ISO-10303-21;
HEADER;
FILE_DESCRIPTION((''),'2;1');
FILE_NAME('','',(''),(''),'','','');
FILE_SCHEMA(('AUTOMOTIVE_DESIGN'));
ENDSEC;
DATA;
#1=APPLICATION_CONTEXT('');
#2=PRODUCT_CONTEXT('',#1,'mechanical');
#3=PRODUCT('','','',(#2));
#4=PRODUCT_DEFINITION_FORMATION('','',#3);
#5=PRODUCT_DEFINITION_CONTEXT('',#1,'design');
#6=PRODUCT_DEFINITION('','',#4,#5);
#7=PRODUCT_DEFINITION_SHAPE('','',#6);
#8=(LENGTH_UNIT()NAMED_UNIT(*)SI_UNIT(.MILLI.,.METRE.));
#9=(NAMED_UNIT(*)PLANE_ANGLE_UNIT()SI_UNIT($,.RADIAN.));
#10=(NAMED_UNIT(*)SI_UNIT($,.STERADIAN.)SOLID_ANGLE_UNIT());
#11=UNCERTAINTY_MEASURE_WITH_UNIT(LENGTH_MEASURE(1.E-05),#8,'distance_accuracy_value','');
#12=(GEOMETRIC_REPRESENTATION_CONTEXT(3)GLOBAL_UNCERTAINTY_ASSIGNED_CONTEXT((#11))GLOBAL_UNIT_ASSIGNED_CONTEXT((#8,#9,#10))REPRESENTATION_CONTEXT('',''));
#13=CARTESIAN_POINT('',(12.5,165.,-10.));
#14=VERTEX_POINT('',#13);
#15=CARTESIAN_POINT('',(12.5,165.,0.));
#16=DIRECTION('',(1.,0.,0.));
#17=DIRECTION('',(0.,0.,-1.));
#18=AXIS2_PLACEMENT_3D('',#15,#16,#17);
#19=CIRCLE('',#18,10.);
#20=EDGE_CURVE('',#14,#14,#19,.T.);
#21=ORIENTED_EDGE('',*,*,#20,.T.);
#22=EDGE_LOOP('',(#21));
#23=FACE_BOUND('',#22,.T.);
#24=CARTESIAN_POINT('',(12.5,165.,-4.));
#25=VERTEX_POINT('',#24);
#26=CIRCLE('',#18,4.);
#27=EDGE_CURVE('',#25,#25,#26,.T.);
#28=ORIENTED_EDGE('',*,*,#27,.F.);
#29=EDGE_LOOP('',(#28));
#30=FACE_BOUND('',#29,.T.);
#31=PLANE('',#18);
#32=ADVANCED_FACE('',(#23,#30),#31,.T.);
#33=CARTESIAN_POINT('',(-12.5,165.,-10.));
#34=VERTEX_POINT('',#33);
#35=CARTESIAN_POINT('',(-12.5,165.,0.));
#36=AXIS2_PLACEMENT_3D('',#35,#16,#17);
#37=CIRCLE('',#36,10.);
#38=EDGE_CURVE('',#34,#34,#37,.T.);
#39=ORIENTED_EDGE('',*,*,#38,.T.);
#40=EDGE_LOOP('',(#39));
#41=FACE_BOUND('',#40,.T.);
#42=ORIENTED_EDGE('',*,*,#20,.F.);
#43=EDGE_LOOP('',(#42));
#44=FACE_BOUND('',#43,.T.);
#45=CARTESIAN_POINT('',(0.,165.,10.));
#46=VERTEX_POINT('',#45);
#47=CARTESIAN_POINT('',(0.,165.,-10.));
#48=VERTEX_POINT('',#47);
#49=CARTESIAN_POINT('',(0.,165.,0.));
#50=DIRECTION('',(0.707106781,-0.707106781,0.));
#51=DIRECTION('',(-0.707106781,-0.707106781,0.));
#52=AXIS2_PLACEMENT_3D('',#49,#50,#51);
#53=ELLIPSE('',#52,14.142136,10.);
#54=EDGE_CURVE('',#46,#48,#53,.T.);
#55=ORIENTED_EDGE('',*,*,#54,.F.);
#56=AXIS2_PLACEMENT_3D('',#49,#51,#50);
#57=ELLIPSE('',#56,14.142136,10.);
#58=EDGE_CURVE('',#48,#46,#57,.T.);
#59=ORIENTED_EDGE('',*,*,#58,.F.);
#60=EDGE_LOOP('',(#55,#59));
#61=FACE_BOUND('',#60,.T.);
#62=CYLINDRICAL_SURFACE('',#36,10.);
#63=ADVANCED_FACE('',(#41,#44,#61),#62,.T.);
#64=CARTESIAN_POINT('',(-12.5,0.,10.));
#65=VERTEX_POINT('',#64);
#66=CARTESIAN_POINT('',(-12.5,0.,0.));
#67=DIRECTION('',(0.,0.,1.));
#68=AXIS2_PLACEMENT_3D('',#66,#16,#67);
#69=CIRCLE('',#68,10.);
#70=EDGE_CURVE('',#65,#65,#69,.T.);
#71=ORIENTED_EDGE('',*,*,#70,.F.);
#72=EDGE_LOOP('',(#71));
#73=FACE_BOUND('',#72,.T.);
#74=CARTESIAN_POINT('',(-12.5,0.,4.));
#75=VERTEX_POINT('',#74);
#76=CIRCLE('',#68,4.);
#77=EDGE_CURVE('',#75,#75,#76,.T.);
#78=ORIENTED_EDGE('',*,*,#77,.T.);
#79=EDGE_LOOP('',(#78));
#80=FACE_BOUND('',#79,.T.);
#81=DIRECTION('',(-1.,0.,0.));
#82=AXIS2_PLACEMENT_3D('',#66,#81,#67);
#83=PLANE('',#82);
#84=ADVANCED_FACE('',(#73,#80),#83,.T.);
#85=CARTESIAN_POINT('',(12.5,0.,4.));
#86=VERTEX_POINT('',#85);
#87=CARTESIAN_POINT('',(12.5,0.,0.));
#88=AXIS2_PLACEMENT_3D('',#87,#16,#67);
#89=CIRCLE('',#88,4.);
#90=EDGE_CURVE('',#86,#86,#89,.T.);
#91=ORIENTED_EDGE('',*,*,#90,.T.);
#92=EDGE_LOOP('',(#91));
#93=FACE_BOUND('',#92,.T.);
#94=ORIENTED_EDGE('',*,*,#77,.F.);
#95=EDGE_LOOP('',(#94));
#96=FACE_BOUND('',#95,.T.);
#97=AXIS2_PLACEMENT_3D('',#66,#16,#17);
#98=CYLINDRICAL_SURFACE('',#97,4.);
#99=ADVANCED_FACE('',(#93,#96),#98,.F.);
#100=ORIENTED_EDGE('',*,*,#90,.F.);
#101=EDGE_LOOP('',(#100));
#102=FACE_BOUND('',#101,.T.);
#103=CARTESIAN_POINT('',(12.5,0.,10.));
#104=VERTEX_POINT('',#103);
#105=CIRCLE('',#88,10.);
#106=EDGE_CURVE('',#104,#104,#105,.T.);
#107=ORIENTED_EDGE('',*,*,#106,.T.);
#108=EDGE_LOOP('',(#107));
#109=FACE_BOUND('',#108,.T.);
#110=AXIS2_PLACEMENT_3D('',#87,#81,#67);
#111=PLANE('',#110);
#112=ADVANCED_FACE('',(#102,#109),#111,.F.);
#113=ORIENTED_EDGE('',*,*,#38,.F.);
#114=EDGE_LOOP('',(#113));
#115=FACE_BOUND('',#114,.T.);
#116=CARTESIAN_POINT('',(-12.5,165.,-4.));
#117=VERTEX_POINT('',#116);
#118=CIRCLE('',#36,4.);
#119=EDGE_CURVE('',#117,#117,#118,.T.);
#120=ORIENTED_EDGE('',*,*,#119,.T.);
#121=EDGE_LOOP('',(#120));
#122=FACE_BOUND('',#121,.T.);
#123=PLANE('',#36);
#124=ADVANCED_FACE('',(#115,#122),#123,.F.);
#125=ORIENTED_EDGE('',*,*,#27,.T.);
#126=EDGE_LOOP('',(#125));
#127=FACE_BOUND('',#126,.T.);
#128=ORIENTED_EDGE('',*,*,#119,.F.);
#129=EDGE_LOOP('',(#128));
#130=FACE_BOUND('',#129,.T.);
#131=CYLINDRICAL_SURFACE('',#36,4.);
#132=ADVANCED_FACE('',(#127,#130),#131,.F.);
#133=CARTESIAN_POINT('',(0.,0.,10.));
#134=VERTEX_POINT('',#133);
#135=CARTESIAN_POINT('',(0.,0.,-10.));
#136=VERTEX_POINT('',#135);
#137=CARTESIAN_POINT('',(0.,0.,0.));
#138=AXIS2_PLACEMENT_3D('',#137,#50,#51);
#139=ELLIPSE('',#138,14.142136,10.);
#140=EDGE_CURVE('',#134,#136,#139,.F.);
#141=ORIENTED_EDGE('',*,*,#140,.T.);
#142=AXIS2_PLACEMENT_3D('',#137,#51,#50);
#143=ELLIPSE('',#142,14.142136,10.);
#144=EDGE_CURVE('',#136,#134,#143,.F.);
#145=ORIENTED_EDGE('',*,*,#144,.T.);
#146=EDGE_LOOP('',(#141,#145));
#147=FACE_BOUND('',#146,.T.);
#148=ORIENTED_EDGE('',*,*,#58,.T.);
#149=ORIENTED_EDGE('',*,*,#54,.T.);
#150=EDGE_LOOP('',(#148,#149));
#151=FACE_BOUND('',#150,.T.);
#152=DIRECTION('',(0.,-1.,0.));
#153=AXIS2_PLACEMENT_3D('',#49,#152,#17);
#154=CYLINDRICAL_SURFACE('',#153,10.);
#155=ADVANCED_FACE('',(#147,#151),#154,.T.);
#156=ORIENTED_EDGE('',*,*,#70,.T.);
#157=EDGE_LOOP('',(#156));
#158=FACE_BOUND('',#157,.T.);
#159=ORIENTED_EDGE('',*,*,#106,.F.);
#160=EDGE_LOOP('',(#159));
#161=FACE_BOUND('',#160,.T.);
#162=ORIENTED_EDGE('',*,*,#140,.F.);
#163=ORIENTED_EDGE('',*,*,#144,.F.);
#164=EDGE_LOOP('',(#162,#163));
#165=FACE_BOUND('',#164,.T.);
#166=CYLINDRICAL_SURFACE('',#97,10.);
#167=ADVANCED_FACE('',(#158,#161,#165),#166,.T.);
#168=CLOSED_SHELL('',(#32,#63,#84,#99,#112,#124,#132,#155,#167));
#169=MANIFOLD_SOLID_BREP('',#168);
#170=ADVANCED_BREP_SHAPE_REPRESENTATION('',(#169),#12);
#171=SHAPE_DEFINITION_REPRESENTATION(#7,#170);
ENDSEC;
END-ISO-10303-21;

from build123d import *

# Parameters (mm, degrees)
SKETCH1_R                = 10
BOSS_EXTRUDE1_DEPTH      = 165
BOSS_EXTRUDE2_DEPTH      = 12.5
BOSS_EXTRUDE2_DEPTH_BACK = 12.5
SKETCH2_R                = 10
SKETCH2_R_2              = 4
CUT_EXTRUDE1_DEPTH       = 176.730617715
CUT_EXTRUDE1_DEPTH_BACK  = 176.730617715
SKETCH2_2_R              = 4


with BuildPart() as part:
    # Sketch1 → Boss-Extrude1 (new body)
    with BuildSketch(Plane(origin=(0, 0, 0), x_dir=(1, 0, 0), z_dir=(0, 1, 0))):
        Circle(SKETCH1_R)
    extrude(amount=BOSS_EXTRUDE1_DEPTH)


with BuildPart() as boss_extrude2_tool:
    # Sketch2 → Boss-Extrude2 (new, two sides: drawn at the far end of the back side and taken through both)
    # profile 1 of 2: a face of its own
    with BuildSketch(Plane(origin=(0, 0, 0), x_dir=(0, 0, -1), z_dir=(1, 0, 0)).offset(-BOSS_EXTRUDE2_DEPTH_BACK)):
        with Locations((0, 165)):
            Circle(SKETCH2_R)
        with Locations((0, 165)):
            Circle(SKETCH2_R_2, mode=Mode.SUBTRACT)
    # profile 2 of 2: a face of its own
    with BuildSketch(Plane(origin=(0, 0, 0), x_dir=(0, 0, -1), z_dir=(1, 0, 0)).offset(-BOSS_EXTRUDE2_DEPTH_BACK)):
        Circle(SKETCH2_R)
        Circle(SKETCH2_R_2, mode=Mode.SUBTRACT)
    extrude(amount=BOSS_EXTRUDE2_DEPTH + BOSS_EXTRUDE2_DEPTH_BACK)


with BuildPart() as part_1:
    add(part.part)


with BuildPart() as part_2:
    # Boss-Extrude2: joined with boss_extrude2_tool
    add(part_1.part.fuse(boss_extrude2_tool.part, tol=0.00001))

    # Sketch2<2> → Cut-Extrude1 (cut, two sides: drawn at the far end of the back side and taken through both)
    with BuildSketch(Plane(origin=(0, 0, 0), x_dir=(0, 0, -1), z_dir=(1, 0, 0)).offset(-CUT_EXTRUDE1_DEPTH_BACK)):
        with Locations((0, 165)):
            Circle(SKETCH2_2_R)
        Circle(SKETCH2_2_R)
    extrude(amount=CUT_EXTRUDE1_DEPTH + CUT_EXTRUDE1_DEPTH_BACK, mode=Mode.SUBTRACT)


solid = part_2.part
